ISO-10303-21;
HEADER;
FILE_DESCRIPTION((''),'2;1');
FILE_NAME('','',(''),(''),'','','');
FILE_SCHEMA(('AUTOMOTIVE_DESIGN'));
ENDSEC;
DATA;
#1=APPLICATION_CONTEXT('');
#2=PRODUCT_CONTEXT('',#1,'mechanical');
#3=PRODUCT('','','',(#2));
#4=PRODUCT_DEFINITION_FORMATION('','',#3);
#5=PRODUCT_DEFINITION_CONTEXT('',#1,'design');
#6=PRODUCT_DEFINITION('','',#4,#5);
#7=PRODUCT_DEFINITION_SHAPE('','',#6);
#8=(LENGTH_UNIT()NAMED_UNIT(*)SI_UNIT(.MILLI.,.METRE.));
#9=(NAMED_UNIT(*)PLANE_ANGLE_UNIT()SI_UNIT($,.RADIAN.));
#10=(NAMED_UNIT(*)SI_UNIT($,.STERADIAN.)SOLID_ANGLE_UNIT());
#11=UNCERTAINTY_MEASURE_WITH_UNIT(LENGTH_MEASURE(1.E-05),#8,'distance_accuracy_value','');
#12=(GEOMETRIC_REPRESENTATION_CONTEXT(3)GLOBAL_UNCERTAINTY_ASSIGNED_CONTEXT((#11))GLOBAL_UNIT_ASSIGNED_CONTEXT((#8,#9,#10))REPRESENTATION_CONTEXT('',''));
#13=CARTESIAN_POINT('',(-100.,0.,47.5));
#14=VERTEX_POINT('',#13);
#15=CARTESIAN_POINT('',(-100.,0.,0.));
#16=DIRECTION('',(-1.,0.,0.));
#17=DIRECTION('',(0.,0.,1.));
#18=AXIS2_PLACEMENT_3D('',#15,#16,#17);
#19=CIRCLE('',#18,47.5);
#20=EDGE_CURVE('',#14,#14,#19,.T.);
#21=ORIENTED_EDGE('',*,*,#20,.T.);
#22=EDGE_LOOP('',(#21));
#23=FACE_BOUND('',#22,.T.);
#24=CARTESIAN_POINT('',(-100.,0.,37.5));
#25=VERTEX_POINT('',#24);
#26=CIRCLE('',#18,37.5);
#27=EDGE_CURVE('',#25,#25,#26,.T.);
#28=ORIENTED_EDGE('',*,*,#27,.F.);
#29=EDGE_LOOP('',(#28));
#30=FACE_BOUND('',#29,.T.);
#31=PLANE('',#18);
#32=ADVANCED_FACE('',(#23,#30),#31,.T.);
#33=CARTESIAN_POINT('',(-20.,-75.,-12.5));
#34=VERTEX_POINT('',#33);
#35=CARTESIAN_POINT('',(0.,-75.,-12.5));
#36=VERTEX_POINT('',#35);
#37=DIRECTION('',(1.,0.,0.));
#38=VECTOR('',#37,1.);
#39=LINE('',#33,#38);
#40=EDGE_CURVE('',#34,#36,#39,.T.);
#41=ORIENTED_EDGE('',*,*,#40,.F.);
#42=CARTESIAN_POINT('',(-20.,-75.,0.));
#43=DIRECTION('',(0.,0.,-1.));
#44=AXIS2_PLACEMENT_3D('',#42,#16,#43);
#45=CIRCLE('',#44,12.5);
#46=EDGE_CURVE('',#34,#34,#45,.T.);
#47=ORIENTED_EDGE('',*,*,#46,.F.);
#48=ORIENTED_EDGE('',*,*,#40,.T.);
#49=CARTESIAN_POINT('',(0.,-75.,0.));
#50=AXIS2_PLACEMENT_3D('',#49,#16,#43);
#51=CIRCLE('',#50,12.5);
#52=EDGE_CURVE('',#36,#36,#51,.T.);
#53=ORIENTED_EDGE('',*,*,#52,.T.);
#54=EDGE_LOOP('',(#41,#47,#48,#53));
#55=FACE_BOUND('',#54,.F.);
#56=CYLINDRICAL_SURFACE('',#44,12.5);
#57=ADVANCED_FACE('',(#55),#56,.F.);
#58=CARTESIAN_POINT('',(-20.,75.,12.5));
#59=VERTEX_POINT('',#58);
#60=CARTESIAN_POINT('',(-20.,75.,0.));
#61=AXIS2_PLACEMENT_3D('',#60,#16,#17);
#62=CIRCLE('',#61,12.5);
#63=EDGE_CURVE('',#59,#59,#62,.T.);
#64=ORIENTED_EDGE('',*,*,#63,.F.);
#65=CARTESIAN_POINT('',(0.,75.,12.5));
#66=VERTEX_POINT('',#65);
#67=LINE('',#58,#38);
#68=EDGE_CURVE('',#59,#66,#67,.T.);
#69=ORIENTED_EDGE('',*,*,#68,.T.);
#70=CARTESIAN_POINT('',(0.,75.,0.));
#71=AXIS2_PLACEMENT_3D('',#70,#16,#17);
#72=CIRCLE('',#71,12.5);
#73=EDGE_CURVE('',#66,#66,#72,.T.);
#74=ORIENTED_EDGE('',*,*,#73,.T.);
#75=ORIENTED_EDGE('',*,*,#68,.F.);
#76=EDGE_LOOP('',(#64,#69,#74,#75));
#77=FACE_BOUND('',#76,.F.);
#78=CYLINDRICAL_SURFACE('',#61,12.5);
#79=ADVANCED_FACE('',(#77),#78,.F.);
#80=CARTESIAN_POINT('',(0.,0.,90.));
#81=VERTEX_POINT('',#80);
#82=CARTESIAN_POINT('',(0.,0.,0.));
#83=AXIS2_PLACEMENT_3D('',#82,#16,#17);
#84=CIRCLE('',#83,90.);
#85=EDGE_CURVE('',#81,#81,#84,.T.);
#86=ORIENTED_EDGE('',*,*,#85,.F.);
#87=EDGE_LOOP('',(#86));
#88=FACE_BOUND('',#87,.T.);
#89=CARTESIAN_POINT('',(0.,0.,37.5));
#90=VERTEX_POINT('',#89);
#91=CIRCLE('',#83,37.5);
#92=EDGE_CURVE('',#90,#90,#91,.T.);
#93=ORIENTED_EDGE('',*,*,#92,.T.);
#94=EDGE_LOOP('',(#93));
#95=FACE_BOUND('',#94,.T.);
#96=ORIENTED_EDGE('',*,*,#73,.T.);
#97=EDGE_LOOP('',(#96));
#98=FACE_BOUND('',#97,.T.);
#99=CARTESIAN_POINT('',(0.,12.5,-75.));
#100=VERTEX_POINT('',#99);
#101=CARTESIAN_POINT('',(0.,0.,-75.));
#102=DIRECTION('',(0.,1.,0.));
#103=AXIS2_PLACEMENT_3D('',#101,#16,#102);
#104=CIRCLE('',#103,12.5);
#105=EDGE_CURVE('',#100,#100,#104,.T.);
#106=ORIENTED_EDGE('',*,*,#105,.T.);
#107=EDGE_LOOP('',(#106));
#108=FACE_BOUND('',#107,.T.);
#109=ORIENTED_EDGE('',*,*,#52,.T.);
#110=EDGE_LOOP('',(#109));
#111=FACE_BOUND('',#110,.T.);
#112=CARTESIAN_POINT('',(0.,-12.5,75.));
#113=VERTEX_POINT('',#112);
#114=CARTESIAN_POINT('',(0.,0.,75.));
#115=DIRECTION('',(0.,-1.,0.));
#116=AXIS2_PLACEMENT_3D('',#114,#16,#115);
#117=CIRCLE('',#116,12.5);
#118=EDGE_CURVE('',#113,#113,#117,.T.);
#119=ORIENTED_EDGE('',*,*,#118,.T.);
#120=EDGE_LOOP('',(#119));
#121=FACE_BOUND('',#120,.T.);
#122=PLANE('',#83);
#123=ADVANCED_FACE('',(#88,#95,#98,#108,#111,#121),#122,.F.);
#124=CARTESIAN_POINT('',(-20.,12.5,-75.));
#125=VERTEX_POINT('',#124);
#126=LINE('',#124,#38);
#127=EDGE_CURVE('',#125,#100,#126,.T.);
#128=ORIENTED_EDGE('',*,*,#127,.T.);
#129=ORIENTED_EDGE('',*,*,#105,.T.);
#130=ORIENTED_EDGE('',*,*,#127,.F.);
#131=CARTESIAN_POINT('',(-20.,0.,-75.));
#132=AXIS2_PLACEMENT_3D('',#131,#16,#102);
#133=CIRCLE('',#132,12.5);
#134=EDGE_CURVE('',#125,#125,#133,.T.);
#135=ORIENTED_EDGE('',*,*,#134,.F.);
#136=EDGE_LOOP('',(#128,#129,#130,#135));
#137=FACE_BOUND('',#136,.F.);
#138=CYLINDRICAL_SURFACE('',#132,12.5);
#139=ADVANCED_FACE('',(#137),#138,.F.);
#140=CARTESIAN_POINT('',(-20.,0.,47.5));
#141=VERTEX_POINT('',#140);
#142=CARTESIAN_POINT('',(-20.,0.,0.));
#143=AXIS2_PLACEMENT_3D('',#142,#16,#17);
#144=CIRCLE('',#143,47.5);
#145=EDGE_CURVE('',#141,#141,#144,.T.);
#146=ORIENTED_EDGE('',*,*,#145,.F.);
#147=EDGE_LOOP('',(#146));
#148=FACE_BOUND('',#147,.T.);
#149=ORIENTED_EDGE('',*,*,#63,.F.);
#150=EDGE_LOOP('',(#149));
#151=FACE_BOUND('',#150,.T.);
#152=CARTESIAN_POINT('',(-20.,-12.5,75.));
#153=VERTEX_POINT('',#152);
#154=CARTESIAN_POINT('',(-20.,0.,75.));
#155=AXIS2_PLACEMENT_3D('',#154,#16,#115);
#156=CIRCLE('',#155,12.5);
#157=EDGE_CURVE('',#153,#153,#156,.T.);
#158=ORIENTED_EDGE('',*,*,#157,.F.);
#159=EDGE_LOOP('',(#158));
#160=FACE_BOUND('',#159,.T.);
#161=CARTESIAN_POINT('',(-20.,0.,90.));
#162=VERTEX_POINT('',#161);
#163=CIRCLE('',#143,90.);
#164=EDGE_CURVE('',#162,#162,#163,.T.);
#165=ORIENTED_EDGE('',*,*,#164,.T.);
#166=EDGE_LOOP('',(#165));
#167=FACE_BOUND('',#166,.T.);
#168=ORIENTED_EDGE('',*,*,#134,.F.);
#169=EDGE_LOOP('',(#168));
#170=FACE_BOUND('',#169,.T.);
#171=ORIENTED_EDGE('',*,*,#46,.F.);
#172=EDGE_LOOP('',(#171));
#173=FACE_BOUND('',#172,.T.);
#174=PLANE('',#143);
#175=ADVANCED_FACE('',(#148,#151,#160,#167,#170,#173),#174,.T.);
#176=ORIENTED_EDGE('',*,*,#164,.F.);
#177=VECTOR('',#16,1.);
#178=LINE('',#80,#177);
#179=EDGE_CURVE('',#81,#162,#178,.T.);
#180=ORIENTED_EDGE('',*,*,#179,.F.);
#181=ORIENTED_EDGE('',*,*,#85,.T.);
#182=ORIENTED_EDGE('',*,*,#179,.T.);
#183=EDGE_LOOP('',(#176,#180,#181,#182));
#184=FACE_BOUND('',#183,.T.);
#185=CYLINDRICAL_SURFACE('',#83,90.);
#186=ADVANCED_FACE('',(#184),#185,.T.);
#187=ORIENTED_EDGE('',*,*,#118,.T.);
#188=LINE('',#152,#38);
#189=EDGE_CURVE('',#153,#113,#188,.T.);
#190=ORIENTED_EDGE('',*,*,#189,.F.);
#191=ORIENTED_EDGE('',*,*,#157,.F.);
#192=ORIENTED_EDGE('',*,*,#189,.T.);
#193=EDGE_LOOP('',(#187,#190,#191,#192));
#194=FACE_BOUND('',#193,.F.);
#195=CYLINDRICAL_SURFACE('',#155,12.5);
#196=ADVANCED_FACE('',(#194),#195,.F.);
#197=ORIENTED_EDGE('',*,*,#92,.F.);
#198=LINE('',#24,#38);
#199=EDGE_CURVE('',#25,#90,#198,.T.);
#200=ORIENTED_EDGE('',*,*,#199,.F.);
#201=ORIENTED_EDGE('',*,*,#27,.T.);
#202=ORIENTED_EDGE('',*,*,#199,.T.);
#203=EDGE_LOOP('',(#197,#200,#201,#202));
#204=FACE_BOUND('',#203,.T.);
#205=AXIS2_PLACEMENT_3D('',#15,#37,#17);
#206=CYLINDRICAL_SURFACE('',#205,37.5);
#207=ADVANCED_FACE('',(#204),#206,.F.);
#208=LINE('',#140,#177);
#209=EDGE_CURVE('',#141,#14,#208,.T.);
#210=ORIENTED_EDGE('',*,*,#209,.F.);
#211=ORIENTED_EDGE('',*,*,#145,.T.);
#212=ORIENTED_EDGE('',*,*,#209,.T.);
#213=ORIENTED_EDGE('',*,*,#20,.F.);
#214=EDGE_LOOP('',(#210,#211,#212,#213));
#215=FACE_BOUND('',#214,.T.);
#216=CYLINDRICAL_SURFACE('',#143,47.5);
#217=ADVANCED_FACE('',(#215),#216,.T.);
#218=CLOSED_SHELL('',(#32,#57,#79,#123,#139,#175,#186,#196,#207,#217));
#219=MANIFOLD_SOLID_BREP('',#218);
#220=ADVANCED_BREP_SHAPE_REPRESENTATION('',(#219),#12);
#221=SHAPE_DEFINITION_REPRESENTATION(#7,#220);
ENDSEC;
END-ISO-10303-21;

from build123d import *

# Parameters (mm, degrees)
F2_R            = 12.5
F3_DEPTH        = 20.001
F3_COPIES_COUNT = 4


# Not quite as in the source:
# - a pattern or mirror of a feature is missing from the dataset's text; its kind, count and spacing are read off the source's solid


with BuildPart() as f1:
    # F0 (on Front) → F1 (revolve)
    with BuildSketch(Plane.XZ):
        Polygon((-100, 37.5), (0, 37.5), (0, 90), (-20, 90), (-20, 47.5), (-100, 47.5), align=None)
    revolve(axis=Axis((-86.3388044803, 0, 0), (-1, 0, 0)))

    # F2 (on face) → F3 (cut, through all)
    with BuildSketch(Plane(origin=(-20, 0, 0), x_dir=(0, -1, 0), z_dir=(-1, 0, 0))):
        with Locations((0, 75)):
            Circle(F2_R)
    f3 = extrude(amount=-F3_DEPTH, mode=Mode.SUBTRACT)

    # F3_copies: F3 ×4 about axis
    f3_copies_axis = Axis((0, 0, 0), (1, 0, 0))
    for i in range(1, F3_COPIES_COUNT):
        add(f3.rotate(f3_copies_axis, i * 360 / F3_COPIES_COUNT), mode=Mode.SUBTRACT)


solid = f1.part
